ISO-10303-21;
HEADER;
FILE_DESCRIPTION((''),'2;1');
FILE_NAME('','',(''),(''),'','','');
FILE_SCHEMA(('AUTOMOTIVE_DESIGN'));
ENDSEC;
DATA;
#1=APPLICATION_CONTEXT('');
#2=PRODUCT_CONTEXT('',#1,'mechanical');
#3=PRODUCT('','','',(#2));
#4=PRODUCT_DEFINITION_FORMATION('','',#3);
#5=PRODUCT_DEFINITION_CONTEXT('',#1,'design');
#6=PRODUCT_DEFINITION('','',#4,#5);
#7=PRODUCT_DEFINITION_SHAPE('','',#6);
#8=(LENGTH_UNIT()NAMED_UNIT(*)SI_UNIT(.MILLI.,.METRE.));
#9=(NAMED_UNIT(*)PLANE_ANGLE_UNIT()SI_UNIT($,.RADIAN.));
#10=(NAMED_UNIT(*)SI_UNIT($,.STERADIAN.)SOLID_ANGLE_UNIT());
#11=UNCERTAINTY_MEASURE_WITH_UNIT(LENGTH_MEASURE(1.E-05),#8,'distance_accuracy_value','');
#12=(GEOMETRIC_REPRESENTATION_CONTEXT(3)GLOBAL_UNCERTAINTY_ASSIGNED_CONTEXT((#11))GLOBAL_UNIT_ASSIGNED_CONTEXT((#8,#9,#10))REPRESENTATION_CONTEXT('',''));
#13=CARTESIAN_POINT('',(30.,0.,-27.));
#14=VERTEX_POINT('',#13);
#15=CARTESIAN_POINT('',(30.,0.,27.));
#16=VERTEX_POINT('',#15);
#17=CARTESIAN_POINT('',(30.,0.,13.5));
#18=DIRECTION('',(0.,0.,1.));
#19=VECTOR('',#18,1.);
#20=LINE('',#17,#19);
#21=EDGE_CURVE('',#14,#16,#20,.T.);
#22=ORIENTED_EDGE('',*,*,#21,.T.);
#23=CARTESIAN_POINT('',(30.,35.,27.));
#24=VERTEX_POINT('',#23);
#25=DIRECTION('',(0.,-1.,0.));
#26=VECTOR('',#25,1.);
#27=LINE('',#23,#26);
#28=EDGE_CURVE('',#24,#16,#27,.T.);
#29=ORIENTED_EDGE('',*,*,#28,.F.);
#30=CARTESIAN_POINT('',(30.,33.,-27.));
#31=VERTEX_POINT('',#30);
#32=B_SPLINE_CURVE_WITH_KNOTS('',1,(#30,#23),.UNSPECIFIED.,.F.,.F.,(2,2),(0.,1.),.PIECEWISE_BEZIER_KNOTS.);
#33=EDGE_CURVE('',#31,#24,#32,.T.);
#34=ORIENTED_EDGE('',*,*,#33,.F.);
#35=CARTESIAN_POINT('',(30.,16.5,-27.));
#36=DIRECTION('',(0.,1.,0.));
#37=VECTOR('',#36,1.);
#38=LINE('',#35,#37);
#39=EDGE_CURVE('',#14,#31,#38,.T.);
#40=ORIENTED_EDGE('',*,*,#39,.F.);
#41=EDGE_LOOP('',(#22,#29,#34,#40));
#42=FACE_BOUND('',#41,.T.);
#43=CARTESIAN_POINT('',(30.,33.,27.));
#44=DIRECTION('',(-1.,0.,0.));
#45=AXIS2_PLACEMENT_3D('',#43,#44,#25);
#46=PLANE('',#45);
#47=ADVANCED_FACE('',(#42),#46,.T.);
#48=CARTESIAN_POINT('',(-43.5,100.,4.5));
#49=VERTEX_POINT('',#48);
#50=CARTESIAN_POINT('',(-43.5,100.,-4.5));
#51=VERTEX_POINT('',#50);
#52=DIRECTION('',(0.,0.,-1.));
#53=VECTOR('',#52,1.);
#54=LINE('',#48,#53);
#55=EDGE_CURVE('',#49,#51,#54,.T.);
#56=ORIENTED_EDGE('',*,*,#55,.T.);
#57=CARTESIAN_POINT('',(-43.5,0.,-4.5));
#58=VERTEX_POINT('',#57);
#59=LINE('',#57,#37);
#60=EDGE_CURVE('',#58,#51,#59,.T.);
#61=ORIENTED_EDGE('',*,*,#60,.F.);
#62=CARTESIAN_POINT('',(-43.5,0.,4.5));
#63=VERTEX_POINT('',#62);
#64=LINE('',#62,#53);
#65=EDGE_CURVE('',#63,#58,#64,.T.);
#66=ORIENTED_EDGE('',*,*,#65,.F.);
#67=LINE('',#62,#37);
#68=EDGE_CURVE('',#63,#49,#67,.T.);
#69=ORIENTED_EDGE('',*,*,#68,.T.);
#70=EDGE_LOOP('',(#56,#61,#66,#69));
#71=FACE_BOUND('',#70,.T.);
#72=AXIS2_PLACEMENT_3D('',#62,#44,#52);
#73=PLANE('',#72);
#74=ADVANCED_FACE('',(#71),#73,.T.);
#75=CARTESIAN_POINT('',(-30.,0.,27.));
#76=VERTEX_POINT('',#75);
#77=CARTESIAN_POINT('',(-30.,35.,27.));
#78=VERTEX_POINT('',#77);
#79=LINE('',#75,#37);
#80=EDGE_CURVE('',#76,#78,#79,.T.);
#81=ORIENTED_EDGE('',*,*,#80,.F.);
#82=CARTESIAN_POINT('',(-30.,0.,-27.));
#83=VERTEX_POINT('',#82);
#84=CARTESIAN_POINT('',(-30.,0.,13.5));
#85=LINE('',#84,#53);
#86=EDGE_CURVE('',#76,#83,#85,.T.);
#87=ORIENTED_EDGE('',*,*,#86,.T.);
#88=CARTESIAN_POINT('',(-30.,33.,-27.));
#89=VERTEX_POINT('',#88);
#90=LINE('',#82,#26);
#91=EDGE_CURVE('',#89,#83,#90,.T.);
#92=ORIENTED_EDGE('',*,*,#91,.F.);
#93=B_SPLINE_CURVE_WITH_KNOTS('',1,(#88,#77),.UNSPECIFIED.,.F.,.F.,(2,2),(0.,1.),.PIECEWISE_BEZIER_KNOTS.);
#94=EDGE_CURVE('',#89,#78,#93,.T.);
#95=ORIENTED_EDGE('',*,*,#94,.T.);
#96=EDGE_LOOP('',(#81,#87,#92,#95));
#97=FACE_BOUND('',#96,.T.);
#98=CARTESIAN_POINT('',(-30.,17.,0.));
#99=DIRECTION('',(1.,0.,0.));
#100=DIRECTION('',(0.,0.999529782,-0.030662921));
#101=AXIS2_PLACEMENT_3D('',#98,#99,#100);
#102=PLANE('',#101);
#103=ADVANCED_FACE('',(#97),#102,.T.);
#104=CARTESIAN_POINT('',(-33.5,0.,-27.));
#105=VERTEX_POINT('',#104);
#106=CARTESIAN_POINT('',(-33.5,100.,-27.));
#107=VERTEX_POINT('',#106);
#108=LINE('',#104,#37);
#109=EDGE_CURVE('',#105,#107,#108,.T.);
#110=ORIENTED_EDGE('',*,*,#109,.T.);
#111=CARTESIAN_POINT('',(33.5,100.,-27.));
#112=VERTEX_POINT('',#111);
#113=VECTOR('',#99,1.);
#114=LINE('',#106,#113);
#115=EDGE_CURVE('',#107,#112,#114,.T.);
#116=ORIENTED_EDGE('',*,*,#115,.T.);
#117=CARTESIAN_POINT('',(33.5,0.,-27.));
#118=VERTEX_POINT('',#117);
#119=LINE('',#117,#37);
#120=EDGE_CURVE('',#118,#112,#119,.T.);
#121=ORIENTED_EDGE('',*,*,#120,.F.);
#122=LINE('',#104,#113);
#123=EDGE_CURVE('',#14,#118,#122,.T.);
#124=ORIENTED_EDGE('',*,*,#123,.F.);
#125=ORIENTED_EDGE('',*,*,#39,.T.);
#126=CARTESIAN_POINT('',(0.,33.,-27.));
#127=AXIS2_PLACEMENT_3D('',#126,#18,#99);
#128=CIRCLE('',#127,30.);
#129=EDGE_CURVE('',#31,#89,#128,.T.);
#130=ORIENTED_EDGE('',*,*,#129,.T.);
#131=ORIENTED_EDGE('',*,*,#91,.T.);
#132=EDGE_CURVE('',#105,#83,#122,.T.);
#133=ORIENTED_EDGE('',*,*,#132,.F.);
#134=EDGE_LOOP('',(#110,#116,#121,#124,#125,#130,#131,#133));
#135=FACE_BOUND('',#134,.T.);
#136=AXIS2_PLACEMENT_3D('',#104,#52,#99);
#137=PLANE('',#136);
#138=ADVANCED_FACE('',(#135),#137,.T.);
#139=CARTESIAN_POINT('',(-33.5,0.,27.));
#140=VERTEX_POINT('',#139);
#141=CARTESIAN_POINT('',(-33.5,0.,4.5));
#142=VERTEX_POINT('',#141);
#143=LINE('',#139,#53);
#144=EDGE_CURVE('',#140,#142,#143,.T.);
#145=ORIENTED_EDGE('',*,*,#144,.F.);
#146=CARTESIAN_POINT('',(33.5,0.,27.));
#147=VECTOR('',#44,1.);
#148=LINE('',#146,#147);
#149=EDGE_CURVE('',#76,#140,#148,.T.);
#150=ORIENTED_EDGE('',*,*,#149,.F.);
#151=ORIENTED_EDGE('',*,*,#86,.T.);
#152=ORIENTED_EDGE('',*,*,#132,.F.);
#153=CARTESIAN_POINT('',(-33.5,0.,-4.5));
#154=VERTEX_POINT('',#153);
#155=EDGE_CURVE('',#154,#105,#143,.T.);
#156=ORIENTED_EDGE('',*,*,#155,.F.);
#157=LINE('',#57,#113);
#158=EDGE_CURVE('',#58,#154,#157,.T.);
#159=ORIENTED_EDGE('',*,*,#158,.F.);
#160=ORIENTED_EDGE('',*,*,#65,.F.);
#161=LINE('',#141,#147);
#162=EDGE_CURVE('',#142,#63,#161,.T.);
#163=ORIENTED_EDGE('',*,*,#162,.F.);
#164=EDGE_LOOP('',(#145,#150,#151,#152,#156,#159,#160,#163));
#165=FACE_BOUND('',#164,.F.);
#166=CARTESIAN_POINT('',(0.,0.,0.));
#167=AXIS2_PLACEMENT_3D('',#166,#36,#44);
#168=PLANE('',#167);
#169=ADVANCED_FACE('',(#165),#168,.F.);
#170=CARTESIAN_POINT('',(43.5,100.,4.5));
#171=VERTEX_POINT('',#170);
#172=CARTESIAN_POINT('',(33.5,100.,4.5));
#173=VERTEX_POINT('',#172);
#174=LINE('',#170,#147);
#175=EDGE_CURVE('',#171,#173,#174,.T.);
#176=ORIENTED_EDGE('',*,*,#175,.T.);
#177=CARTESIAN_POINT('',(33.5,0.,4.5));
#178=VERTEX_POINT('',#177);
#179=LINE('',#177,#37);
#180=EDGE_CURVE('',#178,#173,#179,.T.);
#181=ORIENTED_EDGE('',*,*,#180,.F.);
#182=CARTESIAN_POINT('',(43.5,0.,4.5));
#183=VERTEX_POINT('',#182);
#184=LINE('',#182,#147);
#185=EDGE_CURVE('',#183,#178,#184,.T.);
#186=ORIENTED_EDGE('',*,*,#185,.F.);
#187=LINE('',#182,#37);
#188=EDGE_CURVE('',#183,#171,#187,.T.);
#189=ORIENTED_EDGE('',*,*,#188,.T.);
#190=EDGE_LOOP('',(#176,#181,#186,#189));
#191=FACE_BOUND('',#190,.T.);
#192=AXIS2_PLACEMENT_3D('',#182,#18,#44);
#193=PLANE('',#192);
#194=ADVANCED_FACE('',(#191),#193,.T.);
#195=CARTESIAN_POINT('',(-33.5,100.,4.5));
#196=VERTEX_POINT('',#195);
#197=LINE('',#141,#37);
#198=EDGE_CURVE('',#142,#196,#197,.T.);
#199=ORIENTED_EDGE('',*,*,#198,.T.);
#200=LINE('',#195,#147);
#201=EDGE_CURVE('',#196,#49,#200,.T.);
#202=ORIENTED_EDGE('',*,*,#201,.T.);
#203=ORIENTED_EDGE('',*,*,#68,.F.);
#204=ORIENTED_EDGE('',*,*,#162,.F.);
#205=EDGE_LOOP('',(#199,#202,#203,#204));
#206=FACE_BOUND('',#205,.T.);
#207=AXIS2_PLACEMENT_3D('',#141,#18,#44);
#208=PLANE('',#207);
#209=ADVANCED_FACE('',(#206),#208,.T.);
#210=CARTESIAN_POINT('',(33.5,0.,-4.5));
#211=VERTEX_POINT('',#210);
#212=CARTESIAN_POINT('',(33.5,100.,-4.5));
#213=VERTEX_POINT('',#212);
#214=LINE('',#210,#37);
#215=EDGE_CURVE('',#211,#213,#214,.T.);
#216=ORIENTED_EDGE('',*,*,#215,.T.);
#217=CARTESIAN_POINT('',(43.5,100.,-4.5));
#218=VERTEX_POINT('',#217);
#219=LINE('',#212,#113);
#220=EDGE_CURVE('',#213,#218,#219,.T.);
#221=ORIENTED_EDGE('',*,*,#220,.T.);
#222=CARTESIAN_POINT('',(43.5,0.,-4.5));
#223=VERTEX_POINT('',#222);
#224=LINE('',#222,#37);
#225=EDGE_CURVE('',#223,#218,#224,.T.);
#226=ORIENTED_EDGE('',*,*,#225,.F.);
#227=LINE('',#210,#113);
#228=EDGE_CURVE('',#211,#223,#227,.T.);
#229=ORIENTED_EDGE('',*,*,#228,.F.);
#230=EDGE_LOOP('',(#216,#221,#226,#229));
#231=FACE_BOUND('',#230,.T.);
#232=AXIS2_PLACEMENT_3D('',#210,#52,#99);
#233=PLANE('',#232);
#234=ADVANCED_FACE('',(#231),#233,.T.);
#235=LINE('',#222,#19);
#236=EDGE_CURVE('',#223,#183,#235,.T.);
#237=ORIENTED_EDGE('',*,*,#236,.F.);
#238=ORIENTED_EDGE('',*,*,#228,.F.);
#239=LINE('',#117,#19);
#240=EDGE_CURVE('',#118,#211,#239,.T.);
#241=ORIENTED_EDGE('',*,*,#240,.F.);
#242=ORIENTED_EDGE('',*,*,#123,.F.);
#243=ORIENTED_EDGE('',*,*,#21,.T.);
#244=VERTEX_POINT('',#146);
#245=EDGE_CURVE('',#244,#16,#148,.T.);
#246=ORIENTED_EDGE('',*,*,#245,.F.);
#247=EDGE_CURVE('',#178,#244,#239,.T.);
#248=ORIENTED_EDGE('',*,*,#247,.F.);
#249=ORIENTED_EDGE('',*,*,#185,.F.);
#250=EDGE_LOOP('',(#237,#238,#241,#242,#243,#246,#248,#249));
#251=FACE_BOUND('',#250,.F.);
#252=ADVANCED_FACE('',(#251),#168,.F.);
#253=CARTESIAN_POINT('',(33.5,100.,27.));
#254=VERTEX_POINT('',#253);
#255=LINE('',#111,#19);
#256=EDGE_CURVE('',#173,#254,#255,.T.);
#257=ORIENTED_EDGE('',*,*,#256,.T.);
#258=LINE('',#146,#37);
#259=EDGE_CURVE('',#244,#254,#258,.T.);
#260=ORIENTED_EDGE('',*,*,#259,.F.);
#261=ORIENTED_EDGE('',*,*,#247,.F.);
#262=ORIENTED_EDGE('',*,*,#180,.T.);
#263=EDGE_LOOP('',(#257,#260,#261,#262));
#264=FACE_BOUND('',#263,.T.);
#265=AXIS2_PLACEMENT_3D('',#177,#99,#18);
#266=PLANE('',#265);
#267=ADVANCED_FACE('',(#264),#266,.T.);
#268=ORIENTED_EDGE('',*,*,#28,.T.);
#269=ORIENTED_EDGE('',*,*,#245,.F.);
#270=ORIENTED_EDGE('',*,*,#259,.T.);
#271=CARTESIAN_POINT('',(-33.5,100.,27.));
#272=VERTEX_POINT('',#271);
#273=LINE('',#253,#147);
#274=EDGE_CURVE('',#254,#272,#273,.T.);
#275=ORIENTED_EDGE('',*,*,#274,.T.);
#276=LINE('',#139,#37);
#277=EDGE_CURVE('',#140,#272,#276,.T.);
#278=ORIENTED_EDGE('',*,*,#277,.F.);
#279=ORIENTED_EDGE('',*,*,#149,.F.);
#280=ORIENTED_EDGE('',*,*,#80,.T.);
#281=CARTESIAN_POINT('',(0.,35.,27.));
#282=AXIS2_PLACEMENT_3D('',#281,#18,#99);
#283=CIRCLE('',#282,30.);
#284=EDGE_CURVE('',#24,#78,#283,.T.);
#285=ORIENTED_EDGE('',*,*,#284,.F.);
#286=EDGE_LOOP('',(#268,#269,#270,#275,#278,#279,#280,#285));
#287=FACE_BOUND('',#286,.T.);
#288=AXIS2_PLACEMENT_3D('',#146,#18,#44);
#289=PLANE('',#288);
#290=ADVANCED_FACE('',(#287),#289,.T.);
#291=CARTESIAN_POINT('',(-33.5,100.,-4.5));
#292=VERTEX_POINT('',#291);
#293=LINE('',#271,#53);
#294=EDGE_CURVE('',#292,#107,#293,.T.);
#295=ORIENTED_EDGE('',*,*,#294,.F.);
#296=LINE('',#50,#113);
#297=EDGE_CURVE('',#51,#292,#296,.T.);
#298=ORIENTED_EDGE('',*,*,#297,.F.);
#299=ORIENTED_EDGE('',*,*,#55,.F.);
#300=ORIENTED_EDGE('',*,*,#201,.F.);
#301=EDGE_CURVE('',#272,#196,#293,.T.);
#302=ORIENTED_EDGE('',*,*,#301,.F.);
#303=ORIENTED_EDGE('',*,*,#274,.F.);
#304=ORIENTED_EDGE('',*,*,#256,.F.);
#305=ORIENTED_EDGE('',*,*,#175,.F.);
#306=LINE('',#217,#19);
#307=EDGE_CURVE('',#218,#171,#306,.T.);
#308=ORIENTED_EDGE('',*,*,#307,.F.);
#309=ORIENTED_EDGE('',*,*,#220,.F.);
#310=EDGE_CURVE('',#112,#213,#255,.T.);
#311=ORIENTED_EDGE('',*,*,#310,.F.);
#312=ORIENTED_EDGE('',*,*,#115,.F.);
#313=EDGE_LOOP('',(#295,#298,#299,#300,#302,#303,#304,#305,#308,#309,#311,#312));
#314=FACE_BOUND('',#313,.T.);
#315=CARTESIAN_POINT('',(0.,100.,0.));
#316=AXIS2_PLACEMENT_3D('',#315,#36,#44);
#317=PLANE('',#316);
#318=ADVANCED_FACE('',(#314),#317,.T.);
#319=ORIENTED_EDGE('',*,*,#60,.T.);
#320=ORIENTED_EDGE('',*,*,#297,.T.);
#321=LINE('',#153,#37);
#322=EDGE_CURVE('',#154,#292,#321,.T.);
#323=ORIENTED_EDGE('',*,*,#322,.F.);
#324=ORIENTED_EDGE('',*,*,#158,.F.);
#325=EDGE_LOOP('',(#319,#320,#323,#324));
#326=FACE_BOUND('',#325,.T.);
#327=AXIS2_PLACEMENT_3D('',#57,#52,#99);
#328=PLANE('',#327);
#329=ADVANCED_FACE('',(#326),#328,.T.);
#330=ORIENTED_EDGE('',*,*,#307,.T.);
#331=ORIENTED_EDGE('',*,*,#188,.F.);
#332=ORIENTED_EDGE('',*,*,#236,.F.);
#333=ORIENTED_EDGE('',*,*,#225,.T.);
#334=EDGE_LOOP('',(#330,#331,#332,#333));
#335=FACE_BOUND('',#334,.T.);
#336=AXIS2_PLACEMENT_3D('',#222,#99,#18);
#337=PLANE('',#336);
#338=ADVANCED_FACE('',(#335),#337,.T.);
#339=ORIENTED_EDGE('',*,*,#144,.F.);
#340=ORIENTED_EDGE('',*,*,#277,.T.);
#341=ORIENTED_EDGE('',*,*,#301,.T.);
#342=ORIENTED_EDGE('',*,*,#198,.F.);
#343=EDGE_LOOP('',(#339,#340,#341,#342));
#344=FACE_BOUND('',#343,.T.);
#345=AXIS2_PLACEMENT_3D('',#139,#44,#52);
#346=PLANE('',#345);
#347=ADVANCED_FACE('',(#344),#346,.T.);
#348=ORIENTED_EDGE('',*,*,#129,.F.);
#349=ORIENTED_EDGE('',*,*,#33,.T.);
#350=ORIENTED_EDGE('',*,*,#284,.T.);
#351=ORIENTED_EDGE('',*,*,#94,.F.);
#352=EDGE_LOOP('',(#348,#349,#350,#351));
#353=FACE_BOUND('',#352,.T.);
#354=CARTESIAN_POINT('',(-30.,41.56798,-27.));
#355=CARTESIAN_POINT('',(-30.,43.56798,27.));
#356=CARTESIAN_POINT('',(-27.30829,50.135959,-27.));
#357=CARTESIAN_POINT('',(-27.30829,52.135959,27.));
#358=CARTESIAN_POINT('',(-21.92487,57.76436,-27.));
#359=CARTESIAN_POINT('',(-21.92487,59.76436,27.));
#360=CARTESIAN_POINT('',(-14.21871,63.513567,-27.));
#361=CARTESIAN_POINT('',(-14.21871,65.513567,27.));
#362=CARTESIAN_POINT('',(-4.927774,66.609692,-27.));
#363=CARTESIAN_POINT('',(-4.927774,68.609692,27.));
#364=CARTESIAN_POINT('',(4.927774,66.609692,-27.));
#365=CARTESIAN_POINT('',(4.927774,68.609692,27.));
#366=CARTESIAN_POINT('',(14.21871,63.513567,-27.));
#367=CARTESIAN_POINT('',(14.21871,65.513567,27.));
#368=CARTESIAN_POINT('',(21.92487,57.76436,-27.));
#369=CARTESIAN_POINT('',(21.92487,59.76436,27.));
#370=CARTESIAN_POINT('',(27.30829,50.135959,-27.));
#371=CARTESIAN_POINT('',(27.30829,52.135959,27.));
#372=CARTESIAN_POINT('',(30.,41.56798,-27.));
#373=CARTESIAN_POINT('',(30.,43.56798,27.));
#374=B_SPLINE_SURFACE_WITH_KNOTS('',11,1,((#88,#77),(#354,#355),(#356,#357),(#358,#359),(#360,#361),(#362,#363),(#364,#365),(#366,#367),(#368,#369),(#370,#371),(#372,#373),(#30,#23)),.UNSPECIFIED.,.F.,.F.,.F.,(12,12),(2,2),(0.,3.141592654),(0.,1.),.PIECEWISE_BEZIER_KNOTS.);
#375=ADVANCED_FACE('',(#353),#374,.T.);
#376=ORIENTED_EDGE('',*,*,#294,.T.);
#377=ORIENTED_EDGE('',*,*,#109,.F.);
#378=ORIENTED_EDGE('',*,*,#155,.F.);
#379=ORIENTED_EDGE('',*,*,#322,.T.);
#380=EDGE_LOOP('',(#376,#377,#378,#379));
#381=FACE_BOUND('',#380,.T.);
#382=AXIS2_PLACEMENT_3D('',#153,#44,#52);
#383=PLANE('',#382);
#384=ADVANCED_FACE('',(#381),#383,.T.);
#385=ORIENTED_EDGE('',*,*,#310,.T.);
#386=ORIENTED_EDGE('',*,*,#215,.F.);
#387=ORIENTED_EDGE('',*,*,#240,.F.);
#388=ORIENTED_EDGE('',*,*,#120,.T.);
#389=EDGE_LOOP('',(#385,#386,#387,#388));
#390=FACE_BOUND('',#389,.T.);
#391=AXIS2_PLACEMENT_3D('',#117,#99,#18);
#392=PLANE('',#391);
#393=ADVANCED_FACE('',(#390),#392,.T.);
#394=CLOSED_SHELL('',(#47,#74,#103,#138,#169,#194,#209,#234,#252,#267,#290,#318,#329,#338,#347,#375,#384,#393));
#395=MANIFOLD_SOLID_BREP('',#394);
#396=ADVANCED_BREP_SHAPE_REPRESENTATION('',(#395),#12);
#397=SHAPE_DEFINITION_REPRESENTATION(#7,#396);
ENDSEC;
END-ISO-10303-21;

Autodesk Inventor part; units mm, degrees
ref_plane "YZ Plane" through (0, 0, 0) normal (1, 0, 0) x (0, 1, 0)
ref_plane "XZ Plane" through (0, 0, 0) normal (0, 1, 0) x (-1, 0, 0)
ref_plane "XY Plane" through (0, 0, 0) normal (0, 0, 1) x (1, 0, 0)
sketch "草圖1" plane through (0, 0, 0) normal (0, 1, 0) x (-1, 0, 0)
  line L0 (-33.5, 27) -> (33.5, 27)
  line L1 (33.5, 27) -> (33.5, -27)
  line L2 (33.5, -27) -> (-33.5, -27)
  line L3 (-33.5, -27) -> (-33.5, 27)
  line L4 (-33.5, 27) -> (33.5, -27) construction
  line L5 (33.5, 27) -> (-33.5, -27) construction
  line L6 (43.5, -4.5) -> (33.5, -4.5)
  line L7 (33.5, -4.5) -> (33.5, 4.5)
  line L8 (33.5, 4.5) -> (43.5, 4.5)
  line L9 (43.5, 4.5) -> (43.5, -4.5)
  line L10 (-33.5, -4.5) -> (-43.5, -4.5)
  line L11 (-43.5, -4.5) -> (-43.5, 4.5)
  line L12 (-43.5, 4.5) -> (-33.5, 4.5)
  line L13 (-33.5, 4.5) -> (-33.5, -4.5)
  point P0 (0, 0)
  point P1 (33.5, 0)
  point P2 (-33.5, 0)
  point P3 (-33.5, 4.5)
  point P4 (-33.5, -4.5)
  dimension "d0" = 67
  dimension "d1" = 54
  dimension "d2" = 9
  dimension "d3" = 10
extrude "擠出1" add sketch "草圖1" along normal blind 100
sketch "草圖2" plane through (-33.5, 0, 27) normal (0, 0, 1) x (1, 0, 0)
  circle A0 centre (33.5, 33) radius 30
  line L0 (0, 0) -> (67, 0) projected
  line L1 (3.5, 33) -> (63.5, 33)
  line L2 (63.5, 33) -> (63.5, -12.4903)
  line L3 (63.5, -12.4903) -> (3.5, -12.4903)
  line L4 (3.5, -12.4903) -> (3.5, 33)
  point P0 (33.5, 0)
  point P1 (33.5, 0)
  point P2 (63.5, 33)
  dimension "d6" = 33
  dimension "d7" = 60
extrude "擠出2" cut sketch "草圖2" against normal through all
sketch "草圖3" plane through (33.5, 100, -27) normal (0, 0, -1) x (-1, 0, 0)
  line L0 (3.5, -100) -> (3.5, -67) projected
  arc A0 (63.5, -67) -> (3.5, -67) centre (33.5, -67) ccw projected
  line L1 (63.5, -67) -> (63.5, -100) projected
  line L2 (63.5, -100) -> (67, -100) projected
  line L3 (67, -100) -> (67, 0) projected
  line L4 (0, 0) -> (67, 0) projected
  line L5 (0, -100) -> (0, 0) projected
  line L6 (0, -100) -> (3.5, -100) projected
  line L7 (63.5, -67) -> (63.5, -100) projected
  line L8 (63.5, -100) -> (3.5, -100)
  point P0 (33.5, -100)
sketch "草圖4" plane through (-33.5, 100, 27) normal (0, 0, 1) x (1, 0, 0)
  circle A0 centre (33.5, -65) radius 30
  arc A1 (63.5, -67) -> (3.5, -67) centre (33.5, -67) ccw construction
  line L0 (63.5, -100) -> (3.5, -100)
  line L1 (3.5, -100) -> (3.5, -65)
  line L2 (3.5, -65) -> (63.5, -65)
  line L3 (63.5, -65) -> (63.5, -100)
  point P0 (33.5, -100)
  dimension "d10" = 60
  dimension "d11" = 2
loft "斷面混成1" cut profiles "草圖3", "草圖4" contours L0 A0 L1 L8 / all
properties part number "Slider-1"
